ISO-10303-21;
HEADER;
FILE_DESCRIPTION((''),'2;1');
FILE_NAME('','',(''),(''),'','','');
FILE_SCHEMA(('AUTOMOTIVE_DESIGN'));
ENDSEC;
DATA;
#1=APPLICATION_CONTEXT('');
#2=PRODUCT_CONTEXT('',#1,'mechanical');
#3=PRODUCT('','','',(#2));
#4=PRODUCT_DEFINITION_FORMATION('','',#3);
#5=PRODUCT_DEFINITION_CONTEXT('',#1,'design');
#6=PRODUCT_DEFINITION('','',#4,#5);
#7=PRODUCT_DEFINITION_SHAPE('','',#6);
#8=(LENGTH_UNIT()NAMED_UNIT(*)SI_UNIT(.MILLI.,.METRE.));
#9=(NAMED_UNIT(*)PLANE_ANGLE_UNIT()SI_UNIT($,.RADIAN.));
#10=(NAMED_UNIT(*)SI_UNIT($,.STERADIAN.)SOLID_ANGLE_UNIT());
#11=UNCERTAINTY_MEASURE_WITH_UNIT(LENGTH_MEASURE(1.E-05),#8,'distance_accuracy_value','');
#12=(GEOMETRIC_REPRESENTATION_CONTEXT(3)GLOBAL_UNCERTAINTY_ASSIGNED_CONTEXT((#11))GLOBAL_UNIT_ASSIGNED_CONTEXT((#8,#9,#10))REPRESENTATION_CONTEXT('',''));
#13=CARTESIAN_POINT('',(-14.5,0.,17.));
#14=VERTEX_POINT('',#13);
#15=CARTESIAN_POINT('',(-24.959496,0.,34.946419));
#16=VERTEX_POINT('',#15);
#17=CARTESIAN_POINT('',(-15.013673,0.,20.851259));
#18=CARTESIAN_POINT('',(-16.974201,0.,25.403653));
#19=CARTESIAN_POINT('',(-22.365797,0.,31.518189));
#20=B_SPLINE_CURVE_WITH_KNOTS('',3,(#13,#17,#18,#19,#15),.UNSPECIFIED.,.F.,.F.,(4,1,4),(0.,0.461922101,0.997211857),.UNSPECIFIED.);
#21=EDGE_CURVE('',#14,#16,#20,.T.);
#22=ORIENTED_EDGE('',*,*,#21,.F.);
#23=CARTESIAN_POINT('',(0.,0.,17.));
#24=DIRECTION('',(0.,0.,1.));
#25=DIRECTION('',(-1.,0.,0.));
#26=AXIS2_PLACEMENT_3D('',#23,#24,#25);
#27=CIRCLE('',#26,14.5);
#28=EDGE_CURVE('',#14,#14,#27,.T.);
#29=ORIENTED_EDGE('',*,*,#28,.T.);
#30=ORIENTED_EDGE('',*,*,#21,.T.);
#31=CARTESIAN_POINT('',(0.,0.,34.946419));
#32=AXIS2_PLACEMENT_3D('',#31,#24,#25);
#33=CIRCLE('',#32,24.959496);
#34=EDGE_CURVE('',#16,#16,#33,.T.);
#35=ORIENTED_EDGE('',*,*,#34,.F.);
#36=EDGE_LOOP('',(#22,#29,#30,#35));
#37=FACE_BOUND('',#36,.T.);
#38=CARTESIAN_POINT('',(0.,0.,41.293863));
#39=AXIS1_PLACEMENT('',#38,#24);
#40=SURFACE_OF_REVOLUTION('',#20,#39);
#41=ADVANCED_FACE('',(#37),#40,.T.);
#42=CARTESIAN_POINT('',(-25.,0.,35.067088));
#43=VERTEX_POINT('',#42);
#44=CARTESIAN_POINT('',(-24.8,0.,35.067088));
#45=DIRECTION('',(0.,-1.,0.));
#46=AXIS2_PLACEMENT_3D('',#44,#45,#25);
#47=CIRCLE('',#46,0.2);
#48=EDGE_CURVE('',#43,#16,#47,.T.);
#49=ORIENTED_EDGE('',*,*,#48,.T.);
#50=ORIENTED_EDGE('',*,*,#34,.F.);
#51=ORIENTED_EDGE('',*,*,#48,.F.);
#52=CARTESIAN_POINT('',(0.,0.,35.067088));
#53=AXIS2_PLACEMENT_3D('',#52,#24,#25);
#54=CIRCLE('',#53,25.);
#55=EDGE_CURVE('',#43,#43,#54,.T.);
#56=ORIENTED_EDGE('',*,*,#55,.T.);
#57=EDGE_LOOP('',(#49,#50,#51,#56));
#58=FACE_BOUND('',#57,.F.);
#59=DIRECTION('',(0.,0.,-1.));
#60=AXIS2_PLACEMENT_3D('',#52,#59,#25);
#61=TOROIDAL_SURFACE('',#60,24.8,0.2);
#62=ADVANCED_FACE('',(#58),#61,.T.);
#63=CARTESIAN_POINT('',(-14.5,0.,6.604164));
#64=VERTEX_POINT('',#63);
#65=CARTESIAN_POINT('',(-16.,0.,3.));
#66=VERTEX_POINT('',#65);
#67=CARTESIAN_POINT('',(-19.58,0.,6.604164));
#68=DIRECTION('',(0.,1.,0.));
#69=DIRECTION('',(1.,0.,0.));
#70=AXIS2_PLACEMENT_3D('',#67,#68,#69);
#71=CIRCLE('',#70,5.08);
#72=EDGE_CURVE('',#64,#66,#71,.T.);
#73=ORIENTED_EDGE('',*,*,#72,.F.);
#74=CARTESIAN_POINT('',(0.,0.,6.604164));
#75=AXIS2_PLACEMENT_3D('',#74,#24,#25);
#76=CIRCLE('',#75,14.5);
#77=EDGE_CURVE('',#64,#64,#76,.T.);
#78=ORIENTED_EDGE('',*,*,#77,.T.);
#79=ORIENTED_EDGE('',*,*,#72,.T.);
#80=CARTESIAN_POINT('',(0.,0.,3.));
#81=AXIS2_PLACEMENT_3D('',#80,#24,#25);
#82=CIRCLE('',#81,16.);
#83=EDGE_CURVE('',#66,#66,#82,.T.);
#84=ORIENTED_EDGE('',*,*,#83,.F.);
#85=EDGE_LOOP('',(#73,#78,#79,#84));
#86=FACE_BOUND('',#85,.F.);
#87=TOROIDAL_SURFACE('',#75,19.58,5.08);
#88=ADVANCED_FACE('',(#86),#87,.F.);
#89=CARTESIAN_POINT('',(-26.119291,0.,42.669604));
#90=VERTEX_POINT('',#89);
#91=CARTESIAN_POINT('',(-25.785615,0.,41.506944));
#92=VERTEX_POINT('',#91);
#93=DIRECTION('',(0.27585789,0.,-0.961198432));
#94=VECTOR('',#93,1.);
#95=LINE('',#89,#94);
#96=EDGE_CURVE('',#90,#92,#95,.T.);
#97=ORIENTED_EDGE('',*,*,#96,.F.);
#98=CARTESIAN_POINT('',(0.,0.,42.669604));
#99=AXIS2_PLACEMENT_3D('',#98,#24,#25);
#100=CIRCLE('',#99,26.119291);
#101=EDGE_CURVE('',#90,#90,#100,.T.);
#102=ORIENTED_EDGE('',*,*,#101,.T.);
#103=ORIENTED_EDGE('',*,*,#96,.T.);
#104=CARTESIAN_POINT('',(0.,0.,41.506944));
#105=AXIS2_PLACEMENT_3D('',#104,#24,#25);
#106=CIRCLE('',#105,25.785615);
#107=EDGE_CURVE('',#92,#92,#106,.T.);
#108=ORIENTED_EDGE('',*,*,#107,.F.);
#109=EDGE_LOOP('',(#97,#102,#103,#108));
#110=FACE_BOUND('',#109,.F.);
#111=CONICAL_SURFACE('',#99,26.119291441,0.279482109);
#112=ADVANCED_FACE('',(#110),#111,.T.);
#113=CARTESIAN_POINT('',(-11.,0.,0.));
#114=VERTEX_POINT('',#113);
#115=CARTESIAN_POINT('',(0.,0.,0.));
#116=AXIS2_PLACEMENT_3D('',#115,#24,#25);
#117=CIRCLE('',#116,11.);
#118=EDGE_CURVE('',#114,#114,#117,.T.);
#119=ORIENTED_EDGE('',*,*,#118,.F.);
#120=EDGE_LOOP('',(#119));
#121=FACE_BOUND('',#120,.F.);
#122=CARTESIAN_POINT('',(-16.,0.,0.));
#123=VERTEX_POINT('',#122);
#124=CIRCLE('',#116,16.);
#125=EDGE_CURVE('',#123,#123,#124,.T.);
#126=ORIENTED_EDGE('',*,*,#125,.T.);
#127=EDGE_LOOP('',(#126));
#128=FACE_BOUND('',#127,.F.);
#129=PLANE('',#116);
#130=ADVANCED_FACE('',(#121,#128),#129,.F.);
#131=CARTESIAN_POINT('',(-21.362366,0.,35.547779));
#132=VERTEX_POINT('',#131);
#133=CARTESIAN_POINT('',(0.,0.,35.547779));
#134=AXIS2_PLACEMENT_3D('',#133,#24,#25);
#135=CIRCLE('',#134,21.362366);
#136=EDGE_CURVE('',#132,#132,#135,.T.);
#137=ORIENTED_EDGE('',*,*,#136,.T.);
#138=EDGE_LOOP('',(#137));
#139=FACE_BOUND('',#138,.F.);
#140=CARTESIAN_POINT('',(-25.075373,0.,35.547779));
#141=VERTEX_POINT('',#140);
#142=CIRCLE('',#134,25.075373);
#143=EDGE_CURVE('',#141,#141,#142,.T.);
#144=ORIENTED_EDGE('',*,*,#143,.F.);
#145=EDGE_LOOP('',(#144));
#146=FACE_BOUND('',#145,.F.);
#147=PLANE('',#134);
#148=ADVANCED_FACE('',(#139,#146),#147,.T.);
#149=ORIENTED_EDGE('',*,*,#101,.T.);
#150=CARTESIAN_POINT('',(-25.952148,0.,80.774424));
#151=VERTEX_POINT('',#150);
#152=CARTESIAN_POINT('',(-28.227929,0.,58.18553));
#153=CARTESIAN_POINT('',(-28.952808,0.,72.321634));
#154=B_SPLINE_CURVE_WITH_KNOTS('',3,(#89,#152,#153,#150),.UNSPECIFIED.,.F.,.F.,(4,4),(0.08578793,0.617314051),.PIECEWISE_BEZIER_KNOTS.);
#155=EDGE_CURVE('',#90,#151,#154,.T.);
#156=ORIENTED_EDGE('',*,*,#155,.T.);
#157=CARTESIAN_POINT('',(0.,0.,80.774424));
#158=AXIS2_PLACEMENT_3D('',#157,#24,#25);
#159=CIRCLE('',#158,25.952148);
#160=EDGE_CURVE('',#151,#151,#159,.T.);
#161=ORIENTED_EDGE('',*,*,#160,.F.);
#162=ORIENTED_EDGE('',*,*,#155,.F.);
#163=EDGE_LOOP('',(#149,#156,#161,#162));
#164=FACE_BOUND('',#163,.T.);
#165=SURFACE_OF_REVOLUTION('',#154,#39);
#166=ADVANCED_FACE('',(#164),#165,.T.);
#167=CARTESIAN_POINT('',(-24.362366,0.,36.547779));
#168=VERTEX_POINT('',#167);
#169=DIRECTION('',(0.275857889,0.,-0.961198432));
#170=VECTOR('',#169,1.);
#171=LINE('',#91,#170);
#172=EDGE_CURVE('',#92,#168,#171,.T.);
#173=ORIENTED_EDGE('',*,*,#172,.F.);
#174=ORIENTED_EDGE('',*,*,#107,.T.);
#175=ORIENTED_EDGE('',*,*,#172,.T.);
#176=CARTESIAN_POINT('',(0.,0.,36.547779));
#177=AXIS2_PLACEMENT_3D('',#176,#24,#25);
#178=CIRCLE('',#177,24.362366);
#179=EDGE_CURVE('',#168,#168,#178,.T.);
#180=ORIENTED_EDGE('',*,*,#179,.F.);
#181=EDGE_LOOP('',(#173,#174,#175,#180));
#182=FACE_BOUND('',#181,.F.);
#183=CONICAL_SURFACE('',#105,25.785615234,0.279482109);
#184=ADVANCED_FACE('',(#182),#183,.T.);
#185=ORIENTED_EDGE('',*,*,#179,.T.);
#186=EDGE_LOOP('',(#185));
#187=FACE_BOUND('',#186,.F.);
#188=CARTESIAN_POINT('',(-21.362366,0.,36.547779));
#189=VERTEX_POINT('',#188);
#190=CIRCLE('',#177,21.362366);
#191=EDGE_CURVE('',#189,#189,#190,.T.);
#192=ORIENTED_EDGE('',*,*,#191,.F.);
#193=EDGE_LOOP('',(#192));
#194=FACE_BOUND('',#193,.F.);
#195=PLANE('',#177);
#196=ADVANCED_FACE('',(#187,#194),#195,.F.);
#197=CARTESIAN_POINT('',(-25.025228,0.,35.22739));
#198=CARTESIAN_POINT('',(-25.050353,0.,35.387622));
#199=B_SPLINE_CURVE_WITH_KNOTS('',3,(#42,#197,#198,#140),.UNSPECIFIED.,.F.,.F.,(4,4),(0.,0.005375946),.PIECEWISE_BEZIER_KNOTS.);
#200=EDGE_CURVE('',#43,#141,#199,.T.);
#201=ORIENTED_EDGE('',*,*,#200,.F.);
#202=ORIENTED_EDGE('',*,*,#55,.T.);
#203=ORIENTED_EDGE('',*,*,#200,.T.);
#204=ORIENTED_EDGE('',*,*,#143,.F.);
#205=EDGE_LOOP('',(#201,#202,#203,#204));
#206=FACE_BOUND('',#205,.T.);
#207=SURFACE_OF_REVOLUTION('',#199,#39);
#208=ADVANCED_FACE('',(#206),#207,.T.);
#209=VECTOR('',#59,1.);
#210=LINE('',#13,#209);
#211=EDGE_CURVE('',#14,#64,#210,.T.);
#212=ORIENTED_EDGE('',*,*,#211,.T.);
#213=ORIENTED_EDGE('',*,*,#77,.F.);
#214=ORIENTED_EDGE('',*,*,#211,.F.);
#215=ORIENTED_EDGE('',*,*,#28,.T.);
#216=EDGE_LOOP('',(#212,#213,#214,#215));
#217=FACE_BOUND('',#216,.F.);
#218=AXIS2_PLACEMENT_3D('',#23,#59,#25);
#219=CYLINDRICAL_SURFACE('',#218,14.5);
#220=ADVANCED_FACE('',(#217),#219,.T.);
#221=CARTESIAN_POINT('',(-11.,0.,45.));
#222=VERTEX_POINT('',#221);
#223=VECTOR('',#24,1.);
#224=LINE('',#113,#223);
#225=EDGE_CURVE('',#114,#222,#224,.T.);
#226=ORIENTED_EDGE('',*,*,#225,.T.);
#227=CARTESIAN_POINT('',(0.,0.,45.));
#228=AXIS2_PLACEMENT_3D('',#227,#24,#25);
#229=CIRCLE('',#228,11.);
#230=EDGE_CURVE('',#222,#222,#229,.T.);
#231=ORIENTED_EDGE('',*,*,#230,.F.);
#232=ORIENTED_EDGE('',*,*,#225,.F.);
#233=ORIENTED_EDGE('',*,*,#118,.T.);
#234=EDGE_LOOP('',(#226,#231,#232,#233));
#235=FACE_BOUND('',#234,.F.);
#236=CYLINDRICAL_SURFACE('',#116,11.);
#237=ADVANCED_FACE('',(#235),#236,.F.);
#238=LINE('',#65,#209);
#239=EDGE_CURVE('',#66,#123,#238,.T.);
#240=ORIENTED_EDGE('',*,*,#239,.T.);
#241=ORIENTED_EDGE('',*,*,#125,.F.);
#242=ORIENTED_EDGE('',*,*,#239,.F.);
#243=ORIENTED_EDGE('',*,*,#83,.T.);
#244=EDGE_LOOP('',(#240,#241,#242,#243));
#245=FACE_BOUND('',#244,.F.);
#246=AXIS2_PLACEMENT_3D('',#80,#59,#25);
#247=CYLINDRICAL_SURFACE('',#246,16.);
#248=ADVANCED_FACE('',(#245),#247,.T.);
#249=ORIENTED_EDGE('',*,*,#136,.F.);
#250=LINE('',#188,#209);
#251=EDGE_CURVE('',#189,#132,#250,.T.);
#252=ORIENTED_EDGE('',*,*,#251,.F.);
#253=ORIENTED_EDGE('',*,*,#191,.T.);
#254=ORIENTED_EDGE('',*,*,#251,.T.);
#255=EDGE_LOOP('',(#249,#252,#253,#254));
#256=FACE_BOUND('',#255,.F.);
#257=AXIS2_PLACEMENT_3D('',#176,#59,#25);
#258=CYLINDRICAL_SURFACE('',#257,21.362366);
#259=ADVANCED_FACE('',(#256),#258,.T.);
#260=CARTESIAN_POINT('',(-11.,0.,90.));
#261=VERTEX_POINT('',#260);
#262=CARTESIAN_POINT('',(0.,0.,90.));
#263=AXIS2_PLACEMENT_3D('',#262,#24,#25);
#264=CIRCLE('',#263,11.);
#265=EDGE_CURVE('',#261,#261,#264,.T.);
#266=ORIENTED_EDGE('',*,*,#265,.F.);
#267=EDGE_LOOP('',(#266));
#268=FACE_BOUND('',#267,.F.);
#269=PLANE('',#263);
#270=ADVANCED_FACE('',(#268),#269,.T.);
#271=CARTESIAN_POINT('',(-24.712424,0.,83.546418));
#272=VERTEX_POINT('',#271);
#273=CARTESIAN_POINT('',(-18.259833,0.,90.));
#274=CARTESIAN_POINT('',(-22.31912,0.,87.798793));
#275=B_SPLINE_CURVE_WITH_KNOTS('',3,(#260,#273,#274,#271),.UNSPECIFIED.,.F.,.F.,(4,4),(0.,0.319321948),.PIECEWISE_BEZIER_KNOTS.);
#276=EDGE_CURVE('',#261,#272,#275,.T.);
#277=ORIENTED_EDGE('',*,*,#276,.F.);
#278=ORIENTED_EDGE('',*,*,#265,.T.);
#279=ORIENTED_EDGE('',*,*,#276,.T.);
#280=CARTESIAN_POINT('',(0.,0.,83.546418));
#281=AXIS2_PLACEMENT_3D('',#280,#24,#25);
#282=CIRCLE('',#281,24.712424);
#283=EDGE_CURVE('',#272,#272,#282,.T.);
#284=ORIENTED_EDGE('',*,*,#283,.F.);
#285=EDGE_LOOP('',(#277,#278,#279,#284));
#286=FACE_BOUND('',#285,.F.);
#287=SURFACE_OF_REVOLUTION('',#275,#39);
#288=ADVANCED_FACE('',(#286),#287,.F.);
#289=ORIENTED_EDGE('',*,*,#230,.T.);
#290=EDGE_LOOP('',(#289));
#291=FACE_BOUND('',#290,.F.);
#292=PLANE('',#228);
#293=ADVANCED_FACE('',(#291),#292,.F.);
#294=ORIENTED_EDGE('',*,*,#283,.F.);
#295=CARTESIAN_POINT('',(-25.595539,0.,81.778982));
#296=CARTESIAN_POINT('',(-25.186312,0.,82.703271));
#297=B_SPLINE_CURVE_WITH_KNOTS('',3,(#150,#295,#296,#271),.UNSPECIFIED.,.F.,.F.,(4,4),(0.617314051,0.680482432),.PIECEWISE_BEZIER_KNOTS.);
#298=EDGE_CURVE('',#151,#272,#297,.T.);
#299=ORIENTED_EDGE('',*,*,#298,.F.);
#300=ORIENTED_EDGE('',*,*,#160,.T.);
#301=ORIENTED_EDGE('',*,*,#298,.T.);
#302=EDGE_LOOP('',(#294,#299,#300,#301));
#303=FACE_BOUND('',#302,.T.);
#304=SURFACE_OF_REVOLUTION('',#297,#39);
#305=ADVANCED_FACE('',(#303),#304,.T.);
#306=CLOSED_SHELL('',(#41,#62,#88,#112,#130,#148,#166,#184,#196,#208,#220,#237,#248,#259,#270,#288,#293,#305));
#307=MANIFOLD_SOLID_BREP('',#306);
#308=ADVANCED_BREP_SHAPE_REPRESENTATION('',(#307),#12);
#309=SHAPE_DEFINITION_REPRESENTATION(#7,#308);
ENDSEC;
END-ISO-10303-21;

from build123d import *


# Not quite as in the source:
# - a fillet or chamfer that OpenCascade refuses, or shapes differently, is made with other operations: its cross-section is extruded or revolved along the edge and cut away or added


with BuildPart() as f1:
    # F0 (on Front) → F1 (revolve)
    with BuildSketch(Plane.XZ):
        with BuildLine():
            Line((-16, 3), (-16, 0))
            Line((-16, 0), (-11, 0))
            Line((-11, 0), (-11, 45))
            Line((-11, 45), (0, 45))
            Line((0, 45), (0, 90))
            Line((0, 90), (-11, 90))
            add(Edge.make_bspline(
                [(-11, 90), (-18.2598325737, 90), (-22.3191203043, 87.7987933146), (-24.7124240869, 83.5464183412)],
                knots=[0, 0, 0, 0, 0.3193219477, 0.3193219477, 0.3193219477, 0.3193219477], degree=3))
            add(Edge.make_bspline(
                [(-25.95214754, 80.7744236544), (-25.5955388267, 81.7789820937), (-25.1863115013, 82.7032707784), (-24.7124240769, 83.5464183618)],
                knots=[0.6173140508, 0.6173140508, 0.6173140508, 0.6173140508, 0.6804824316, 0.6804824316, 0.6804824316, 0.6804824316], degree=3))
            add(Edge.make_bspline(
                [(-25.95214754, 80.7744236544), (-29.013744824, 72.1320741786), (-28.1040669162, 57.593769762), (-25.7856152344, 41.5069436394)],
                knots=[0.3826740582, 0.3826740582, 0.3826740582, 0.3826740582, 0.9280294048, 0.9280294048, 0.9280294048, 0.9280294048], degree=3))
            Line((-25.7856152343, 41.5069436384), (-24.3623662292, 36.5477789253))
            Line((-24.3623662292, 36.5477789253), (-21.3623662292, 36.5477789253))
            Line((-21.3623662292, 36.5477789253), (-21.3623662292, 35.5477789253))
            Line((-21.3623662292, 35.5477789253), (-24.0753725342, 35.5477789253))
            Line((-24.0753725342, 35.5477789253), (-24.8771885438, 35.5477789253))
            Line((-24.8771885438, 35.5477789253), (-25.0753725342, 35.5477789253))
            add(Edge.make_bspline(
                [(-25, 35.0670883895), (-25.0252278751, 35.22739015), (-25.0503528609, 35.3876218128), (-25.0753725342, 35.5477789253)],
                knots=[0, 0, 0, 0, 0.0053759457, 0.0053759457, 0.0053759457, 0.0053759457], degree=3))
            ThreePointArc((-25, 35.0670883895), (-24.9896036739, 35.0034452685), (-24.9594955315, 34.9464186939))
            add(Edge.make_bspline(
                [(-14.5, 17), (-15.0136726081, 20.8512590653), (-16.9742007652, 25.4036532302), (-22.365796569, 31.5181893252), (-24.9594955315, 34.9464186939)],
                knots=[0, 0, 0, 0, 0.461922101, 0.9972118566, 0.9972118566, 0.9972118566, 0.9972118566], degree=3))
            Line((-14.5, 17), (-14.5, 3))
            Line((-14.5, 3), (-16, 3))
        make_face()
        with BuildLine():
            add(Edge.make_bspline(
                [(-25.95214754, 80.7744236544), (-29.013744824, 72.1320741786), (-28.1040669162, 57.593769762), (-25.7856152344, 41.5069436394)],
                knots=[0.3826740582, 0.3826740582, 0.3826740582, 0.3826740582, 0.9280294048, 0.9280294048, 0.9280294048, 0.9280294048], degree=3))
            add(Edge.make_bspline(
                [(-26.119291441, 42.669604047), (-28.2279288517, 58.1855295549), (-28.9528077457, 72.3216337444), (-25.95214754, 80.7744236544)],
                knots=[0.0857879305, 0.0857879305, 0.0857879305, 0.0857879305, 0.6173140508, 0.6173140508, 0.6173140508, 0.6173140508], degree=3))
            Line((-26.119291441, 42.669604047), (-25.7856152343, 41.5069436384))
        make_face()
    revolve(axis=Axis((0, 0, 41.293862511), (0, 0, 1)))

    # F2: fillet of radius 5.08 on 1 edges, made by hand

    # F2_s1 → F2_t2 (revolve)
    with BuildSketch(Plane.XZ):
        with BuildLine():
            ThreePointArc((-14.5, 6.6041642582), (-14.8899680172, 4.6522421286), (-16, 3))
            Line((-16, 3), (-14.5, 3))
            Line((-14.5, 3), (-14.5, 6.6041642582))
        make_face()
    revolve(axis=Axis((0, 0, 3), (0, 0, 1)))


solid = f1.part
